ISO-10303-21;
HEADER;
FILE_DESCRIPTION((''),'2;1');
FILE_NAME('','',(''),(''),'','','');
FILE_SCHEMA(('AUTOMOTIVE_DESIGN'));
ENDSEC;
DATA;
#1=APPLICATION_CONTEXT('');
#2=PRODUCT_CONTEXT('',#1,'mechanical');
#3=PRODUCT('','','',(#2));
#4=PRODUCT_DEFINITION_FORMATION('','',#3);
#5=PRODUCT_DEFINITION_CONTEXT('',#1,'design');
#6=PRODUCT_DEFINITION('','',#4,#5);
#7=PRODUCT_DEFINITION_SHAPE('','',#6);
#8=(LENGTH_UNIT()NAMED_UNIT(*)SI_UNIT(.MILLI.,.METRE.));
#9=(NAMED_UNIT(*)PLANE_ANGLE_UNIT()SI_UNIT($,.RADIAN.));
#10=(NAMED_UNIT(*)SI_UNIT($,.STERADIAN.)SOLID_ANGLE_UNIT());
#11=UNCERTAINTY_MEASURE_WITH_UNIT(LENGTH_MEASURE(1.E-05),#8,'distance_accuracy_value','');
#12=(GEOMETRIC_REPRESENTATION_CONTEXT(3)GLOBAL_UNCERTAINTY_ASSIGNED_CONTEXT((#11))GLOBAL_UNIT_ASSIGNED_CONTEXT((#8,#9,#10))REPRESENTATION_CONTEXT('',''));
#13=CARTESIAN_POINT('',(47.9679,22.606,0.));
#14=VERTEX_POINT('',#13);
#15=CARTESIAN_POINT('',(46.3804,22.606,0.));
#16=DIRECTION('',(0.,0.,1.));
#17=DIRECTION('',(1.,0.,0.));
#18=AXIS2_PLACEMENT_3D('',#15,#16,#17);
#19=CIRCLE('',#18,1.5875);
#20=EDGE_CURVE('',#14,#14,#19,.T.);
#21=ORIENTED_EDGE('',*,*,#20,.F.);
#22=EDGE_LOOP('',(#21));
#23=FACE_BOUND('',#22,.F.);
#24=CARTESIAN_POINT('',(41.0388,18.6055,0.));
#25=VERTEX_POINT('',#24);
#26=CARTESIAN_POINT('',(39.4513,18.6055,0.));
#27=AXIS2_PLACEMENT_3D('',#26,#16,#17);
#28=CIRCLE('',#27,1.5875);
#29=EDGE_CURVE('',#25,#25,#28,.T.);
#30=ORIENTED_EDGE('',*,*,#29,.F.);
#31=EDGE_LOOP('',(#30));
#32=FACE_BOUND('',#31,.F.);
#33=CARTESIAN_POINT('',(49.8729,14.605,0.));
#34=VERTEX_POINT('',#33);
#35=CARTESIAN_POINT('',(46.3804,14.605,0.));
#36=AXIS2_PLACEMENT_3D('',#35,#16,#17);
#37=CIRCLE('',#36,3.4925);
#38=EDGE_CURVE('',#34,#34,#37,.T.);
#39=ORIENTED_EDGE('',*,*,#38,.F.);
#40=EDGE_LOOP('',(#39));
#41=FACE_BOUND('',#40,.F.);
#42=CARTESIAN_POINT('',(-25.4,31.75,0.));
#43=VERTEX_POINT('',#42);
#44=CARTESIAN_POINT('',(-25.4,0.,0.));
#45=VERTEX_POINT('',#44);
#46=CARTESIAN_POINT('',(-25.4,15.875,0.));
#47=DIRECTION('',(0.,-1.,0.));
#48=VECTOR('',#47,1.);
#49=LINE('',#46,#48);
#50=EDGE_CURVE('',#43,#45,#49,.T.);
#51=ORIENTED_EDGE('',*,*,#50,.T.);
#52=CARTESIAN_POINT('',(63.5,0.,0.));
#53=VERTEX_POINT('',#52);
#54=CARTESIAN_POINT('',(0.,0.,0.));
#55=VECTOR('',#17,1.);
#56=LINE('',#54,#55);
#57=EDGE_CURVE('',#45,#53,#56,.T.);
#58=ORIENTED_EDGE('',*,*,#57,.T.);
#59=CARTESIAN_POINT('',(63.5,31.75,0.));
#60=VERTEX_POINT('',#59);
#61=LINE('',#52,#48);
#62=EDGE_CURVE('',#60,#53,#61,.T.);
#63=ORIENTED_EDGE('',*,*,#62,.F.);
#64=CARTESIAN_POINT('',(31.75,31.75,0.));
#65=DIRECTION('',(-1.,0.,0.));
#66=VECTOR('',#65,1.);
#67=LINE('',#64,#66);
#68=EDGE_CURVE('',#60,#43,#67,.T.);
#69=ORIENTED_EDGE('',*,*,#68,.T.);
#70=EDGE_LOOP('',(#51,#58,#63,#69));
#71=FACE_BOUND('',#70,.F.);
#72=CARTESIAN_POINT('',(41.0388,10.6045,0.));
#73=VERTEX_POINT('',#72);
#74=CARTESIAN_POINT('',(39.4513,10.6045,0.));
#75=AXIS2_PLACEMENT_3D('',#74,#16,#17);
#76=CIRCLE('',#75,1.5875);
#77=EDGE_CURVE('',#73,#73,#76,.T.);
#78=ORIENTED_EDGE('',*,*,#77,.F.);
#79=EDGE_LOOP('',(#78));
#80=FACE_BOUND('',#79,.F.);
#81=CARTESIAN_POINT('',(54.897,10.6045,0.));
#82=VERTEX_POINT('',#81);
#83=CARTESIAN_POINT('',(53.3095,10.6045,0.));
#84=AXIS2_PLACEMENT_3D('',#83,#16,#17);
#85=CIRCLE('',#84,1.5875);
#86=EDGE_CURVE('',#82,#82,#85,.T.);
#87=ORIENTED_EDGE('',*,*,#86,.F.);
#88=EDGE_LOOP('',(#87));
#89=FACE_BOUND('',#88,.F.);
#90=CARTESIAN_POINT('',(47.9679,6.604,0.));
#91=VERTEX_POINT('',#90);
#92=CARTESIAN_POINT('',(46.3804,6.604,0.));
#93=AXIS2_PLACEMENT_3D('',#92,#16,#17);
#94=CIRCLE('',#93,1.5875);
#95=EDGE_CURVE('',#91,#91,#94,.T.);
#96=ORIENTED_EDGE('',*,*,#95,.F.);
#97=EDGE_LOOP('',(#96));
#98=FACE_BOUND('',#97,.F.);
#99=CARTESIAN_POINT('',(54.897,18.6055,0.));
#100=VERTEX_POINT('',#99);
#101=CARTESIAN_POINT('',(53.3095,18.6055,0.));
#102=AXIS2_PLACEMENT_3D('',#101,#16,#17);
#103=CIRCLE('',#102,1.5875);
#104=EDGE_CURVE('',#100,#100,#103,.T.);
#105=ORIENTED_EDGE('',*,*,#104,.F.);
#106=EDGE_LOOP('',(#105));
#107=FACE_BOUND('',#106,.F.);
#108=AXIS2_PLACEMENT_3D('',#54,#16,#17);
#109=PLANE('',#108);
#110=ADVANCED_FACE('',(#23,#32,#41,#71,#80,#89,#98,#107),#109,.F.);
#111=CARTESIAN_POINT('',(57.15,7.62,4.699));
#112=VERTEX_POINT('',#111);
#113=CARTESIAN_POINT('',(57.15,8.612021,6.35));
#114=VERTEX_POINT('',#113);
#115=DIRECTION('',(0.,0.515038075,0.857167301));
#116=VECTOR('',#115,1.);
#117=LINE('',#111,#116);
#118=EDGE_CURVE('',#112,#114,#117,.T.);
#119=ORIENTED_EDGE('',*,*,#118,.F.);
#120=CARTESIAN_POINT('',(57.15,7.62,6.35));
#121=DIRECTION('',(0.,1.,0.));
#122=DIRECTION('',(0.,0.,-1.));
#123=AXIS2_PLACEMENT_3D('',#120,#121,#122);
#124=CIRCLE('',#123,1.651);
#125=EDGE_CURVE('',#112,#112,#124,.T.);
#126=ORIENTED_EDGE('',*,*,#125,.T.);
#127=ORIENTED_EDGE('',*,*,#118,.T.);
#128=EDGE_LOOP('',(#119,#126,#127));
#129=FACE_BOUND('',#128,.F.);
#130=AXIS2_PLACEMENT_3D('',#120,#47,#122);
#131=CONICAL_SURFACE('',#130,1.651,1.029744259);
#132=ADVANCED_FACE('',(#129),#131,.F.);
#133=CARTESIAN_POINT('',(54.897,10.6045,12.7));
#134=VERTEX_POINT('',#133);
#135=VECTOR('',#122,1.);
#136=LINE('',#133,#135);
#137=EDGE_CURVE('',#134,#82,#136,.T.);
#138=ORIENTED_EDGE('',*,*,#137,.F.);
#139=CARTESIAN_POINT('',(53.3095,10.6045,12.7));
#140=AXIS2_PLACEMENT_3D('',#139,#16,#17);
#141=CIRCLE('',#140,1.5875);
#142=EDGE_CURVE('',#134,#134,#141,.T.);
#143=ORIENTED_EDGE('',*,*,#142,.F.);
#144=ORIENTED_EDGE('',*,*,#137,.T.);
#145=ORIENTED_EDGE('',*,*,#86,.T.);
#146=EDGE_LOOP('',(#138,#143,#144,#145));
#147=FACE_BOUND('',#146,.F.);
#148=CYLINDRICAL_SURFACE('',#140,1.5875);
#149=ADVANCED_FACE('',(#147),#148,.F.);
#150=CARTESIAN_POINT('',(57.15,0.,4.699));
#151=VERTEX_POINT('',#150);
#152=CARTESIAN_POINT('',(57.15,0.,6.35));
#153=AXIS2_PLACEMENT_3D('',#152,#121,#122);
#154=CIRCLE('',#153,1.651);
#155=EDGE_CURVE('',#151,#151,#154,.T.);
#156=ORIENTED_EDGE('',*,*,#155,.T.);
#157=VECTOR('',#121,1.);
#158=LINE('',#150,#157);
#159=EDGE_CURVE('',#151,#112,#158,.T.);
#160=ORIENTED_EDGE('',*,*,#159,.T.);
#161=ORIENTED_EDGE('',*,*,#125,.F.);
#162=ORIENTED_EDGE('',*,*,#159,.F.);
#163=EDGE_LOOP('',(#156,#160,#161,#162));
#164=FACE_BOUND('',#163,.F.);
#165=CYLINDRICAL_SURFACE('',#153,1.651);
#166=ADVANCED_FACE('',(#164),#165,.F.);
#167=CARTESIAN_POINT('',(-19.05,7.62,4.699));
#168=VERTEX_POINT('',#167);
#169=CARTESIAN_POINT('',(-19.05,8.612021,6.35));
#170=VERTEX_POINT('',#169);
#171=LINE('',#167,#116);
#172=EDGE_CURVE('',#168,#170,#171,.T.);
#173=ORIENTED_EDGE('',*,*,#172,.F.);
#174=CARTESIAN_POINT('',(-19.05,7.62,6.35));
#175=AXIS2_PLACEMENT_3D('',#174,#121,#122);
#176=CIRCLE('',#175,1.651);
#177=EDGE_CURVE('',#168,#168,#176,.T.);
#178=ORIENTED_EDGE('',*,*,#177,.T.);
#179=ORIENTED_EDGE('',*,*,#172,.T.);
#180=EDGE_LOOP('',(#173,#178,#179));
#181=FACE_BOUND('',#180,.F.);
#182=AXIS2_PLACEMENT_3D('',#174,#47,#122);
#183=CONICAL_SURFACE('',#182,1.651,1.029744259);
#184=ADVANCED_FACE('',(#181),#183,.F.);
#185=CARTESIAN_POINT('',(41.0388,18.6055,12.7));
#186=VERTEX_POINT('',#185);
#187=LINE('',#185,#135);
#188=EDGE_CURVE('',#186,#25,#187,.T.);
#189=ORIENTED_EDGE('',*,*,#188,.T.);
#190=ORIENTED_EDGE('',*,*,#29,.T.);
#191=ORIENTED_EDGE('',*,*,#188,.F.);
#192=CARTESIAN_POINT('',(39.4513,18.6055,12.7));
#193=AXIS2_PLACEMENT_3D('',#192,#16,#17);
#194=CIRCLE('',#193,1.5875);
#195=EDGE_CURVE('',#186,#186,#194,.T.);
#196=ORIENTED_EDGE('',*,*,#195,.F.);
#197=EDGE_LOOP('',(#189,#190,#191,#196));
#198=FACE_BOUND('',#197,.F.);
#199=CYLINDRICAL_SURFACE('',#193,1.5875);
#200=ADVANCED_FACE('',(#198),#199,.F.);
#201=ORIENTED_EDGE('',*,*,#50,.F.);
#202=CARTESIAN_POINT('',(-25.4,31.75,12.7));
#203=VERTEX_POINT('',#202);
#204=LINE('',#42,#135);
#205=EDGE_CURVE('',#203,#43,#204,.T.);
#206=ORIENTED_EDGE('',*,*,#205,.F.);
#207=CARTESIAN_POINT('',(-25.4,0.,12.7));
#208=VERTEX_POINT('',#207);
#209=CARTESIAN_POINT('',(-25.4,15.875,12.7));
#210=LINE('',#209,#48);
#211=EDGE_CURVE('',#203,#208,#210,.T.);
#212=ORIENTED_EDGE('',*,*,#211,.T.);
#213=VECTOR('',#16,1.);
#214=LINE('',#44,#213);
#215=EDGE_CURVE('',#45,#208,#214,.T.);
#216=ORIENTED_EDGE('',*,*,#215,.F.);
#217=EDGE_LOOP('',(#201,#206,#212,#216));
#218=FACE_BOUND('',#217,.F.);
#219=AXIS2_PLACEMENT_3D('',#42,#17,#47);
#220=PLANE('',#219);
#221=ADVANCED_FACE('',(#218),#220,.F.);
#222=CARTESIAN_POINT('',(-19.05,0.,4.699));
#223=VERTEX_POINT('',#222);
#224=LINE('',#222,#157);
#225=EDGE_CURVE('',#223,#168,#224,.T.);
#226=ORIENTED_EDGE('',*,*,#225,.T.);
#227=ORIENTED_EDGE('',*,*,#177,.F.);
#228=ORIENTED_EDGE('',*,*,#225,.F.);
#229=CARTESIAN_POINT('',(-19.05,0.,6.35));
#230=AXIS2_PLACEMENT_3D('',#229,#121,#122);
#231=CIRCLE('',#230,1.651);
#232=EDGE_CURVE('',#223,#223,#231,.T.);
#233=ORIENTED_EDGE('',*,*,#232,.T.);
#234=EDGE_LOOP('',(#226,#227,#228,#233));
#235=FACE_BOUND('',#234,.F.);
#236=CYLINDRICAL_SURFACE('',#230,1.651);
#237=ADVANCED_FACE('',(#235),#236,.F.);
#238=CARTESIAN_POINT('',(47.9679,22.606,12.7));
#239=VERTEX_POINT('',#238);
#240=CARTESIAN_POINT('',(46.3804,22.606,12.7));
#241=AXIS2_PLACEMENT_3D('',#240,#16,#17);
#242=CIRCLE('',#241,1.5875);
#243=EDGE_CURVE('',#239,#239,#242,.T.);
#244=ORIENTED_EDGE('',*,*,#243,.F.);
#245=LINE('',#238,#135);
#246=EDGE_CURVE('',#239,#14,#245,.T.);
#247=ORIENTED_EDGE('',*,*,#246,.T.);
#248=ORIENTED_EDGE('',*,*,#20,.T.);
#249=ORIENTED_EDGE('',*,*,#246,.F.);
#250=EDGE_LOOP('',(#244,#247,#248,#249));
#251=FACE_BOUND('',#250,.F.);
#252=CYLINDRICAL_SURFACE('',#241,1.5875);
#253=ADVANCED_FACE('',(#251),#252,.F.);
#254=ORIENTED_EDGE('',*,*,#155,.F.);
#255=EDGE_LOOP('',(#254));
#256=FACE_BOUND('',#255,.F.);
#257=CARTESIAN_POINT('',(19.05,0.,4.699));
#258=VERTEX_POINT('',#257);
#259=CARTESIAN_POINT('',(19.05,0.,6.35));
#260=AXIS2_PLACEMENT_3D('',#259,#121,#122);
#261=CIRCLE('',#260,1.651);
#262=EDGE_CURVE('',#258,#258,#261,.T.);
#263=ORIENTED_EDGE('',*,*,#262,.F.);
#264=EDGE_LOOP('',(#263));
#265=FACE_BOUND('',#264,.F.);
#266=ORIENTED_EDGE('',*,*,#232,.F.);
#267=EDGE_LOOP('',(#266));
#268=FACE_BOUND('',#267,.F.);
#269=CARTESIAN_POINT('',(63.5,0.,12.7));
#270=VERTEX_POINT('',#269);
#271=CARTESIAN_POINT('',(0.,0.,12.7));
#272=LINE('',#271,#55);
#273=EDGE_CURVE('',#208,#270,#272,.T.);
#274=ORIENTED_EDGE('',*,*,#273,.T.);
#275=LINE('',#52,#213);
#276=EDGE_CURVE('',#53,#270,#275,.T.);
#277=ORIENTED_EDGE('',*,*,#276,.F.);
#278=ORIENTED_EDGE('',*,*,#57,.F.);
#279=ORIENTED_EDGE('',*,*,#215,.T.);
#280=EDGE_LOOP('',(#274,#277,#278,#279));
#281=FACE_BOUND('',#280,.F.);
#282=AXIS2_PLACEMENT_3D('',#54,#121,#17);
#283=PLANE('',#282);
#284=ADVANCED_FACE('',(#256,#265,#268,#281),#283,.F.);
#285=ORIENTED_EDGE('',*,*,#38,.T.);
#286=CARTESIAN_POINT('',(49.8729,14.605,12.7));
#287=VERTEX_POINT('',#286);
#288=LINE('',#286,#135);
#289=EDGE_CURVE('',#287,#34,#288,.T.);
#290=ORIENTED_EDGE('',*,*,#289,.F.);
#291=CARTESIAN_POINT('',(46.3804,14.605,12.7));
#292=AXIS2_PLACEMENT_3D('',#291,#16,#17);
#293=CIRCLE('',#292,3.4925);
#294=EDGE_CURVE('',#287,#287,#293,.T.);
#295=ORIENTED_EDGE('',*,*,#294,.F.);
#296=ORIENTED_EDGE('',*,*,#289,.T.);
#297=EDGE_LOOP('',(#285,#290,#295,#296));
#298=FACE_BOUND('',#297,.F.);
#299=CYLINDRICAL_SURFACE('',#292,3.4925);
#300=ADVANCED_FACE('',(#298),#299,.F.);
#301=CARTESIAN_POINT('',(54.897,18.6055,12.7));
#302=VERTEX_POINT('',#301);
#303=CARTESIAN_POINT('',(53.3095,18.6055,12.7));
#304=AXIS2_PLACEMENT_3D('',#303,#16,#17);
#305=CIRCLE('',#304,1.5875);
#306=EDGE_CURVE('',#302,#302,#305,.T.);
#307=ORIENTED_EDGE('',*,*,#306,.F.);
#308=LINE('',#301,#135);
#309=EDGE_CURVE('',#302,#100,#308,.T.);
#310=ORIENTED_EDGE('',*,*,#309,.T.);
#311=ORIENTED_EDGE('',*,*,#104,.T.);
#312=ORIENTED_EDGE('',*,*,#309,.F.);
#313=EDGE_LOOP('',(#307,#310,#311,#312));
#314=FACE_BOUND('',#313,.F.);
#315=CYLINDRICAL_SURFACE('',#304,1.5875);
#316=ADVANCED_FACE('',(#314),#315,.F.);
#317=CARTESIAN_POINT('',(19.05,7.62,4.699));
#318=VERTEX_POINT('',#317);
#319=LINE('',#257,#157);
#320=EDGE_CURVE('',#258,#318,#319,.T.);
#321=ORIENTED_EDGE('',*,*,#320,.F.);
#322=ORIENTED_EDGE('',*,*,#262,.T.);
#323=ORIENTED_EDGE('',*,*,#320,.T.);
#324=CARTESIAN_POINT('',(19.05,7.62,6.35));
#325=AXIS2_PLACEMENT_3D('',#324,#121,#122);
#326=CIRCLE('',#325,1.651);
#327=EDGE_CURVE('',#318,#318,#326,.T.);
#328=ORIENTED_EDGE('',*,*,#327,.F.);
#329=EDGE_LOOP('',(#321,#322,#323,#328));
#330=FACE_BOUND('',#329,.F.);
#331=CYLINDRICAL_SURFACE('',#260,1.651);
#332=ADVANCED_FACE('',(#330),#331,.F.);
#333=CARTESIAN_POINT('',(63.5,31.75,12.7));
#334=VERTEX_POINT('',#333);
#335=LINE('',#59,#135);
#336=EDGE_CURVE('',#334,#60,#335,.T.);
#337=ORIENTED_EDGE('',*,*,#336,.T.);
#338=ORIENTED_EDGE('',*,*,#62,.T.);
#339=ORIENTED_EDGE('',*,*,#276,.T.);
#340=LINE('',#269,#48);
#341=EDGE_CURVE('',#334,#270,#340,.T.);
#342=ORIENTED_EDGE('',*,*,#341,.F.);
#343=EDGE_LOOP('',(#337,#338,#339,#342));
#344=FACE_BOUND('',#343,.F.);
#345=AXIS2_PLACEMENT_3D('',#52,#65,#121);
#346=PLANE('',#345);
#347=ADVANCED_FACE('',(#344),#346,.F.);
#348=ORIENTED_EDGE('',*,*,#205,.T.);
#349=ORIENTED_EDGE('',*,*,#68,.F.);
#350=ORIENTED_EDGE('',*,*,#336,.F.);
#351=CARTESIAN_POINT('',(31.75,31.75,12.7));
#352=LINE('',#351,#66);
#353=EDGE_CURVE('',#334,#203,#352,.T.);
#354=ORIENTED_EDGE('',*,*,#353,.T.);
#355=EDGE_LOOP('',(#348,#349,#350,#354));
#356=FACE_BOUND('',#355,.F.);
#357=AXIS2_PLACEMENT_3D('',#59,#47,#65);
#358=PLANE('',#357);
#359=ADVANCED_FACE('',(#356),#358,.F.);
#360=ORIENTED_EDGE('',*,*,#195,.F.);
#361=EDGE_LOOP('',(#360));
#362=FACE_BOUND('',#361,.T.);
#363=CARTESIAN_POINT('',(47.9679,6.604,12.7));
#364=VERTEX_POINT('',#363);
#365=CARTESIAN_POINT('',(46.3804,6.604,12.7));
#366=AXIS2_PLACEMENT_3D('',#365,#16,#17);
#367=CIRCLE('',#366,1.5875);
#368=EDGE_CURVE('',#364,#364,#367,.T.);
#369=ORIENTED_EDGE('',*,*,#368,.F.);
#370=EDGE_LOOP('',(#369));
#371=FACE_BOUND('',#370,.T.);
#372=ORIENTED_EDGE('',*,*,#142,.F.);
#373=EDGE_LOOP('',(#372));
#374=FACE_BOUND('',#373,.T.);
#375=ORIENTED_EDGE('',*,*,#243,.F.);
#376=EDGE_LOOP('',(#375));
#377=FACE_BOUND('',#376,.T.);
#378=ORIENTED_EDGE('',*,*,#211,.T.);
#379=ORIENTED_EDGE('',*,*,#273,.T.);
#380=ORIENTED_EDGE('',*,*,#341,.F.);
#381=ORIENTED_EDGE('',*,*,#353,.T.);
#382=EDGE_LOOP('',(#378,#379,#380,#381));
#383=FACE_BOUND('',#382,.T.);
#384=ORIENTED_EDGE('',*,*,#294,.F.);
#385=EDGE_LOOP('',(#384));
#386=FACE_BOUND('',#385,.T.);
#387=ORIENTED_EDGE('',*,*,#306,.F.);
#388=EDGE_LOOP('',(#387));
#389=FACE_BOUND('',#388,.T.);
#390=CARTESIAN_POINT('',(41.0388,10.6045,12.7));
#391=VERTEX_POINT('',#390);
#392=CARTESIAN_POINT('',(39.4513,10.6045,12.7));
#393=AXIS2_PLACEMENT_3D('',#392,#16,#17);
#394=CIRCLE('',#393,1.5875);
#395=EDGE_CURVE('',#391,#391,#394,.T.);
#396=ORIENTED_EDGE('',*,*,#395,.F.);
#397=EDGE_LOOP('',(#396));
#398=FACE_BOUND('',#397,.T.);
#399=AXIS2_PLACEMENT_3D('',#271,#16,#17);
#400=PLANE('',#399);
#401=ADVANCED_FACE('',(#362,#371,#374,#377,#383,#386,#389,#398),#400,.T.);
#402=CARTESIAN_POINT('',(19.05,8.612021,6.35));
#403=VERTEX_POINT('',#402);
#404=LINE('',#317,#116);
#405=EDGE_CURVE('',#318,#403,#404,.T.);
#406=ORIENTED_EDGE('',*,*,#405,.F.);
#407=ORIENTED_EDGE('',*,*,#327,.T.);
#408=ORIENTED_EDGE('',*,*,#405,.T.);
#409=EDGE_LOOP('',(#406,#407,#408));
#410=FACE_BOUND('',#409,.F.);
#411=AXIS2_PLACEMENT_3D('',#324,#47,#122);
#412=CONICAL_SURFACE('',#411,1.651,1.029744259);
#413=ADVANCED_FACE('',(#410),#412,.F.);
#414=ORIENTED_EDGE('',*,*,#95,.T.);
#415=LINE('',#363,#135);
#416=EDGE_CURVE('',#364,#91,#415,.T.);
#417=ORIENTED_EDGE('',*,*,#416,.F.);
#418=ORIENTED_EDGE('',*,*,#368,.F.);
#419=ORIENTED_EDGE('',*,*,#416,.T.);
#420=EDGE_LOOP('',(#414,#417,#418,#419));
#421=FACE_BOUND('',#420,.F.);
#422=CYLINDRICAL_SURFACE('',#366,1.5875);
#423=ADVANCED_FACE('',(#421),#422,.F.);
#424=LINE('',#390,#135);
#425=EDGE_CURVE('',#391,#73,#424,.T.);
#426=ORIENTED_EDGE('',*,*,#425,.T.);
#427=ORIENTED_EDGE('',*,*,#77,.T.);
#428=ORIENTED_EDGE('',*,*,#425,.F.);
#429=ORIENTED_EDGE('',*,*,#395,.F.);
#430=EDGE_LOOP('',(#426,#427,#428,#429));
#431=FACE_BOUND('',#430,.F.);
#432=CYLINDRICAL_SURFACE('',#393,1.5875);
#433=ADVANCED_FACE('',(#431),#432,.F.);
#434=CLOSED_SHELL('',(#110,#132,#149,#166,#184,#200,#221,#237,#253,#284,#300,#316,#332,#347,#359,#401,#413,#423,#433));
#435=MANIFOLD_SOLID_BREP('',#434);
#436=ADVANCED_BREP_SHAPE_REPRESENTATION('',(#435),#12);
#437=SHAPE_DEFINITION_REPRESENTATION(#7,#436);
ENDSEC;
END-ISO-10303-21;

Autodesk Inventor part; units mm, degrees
ref_plane "YZ Plane" through (0, 0, 0) normal (1, 0, 0) x (0, 1, 0)
ref_plane "XZ Plane" through (0, 0, 0) normal (0, 1, 0) x (-1, 0, 0)
ref_plane "XY Plane" through (0, 0, 0) normal (0, 0, 1) x (1, 0, 0)
sketch "Sketch1" plane through (0, 0, 0) normal (0, 0, 1) x (1, 0, 0)
  line L0 (0, 0) -> (63.5, 0)
  line L1 (63.5, 0) -> (63.5, 31.75)
  line L2 (63.5, 31.75) -> (0, 31.75)
  line L3 (0, 31.75) -> (0, 0)
  dimension "d0" = 63.5
  dimension "d1" = 31.75
extrude "Extrusion1" add sketch "Sketch1" along normal blind 12.7
sketch "Sketch2" plane through (0, 0, 12.7) normal (0, 0, 1) x (1, 0, 0)
  line L0 (63.5, 0) -> (63.5, 31.75) projected
  line L1 (63.5, 12.7901) -> (80.6196, 12.7901) construction
  line L2 (0, 0) -> (63.5, 0) projected
  line L3 (46.3804, 0) -> (46.3804, 14.605)
  line L4 (46.3804, 0) -> (60.9854, 0) construction
  circle A0 centre (46.3804, 14.605) radius 3.4925
  circle A1 centre (46.3804, 14.605) radius 8.001
  circle A2 centre (46.3804, 6.604) radius 1.5875
  circle A3 centre (53.3095, 10.6045) radius 1.5875
  circle A4 centre (46.3804, 14.605) radius 8.001
  circle A5 centre (53.3095, 18.6055) radius 1.5875
  circle A6 centre (46.3804, 14.605) radius 8.001
  circle A7 centre (46.3804, 22.606) radius 1.5875
  circle A8 centre (46.3804, 14.605) radius 8.001
  circle A9 centre (39.4513, 18.6055) radius 1.5875
  circle A10 centre (46.3804, 14.605) radius 8.001
  circle A11 centre (39.4513, 10.6045) radius 1.5875
  circle A12 centre (46.3804, 14.605) radius 8.001
  dimension "d9" = 16.002
  dimension "d6" = 14.605
  dimension "d7" = 90
  dimension "d8" = 6.985
  dimension "d10" = 3.175
  dimension "d13" = 360
  dimension "d17" = 17.1196
extrude "Extrusion2" cut sketch "Sketch2" against normal blind 19.05 contours A2 A1 L3 | L3 A1 A2 | A1 A2 L3 | L3 A2 A1 | A11 A1 | A1 A11 | A3 A1 | A1 A3 | A9 A1 | A1 A9 | A5 A1 | A1 A5 | A7 A1 | A1 A7 | A0
thicken "Thicken1" operation add thickness 25.4 both sides no extend neighbours yes toward (-1, 0, 0) faces at (0, 21.1667, 4.2333)
sketch "Sketch4" plane through (63.5, 0, 0) normal (0, -1, 0) x (1, 0, 0)
  line L0 (-88.9, 0) -> (-88.9, 12.7) projected
  line L1 (0, 0) -> (0, 12.7) projected
  point P0 (-63.5, 0)
  point P1 (-82.55, 6.35)
  point P2 (-44.45, 6.35)
  point P3 (-6.35, 6.35)
  dimension "d42" = 6.35
  dimension "d43" = 88.9
  dimension "d44" = 44.45
  dimension "d45" = 6.35
hole "Hole1" at (-19.05, 0, 6.35) at (19.05, 0, 6.35) at (57.15, 0, 6.35) direction (0, 1, 0) diameter 3.302 depth 7.62 tip angle 118 thread size "8-32 UNC" class "2B" standard "ANSI Unified Screw Threads"
equation "\"d44\" = 0.5 * d43"
properties part number "MotorHolderB"
